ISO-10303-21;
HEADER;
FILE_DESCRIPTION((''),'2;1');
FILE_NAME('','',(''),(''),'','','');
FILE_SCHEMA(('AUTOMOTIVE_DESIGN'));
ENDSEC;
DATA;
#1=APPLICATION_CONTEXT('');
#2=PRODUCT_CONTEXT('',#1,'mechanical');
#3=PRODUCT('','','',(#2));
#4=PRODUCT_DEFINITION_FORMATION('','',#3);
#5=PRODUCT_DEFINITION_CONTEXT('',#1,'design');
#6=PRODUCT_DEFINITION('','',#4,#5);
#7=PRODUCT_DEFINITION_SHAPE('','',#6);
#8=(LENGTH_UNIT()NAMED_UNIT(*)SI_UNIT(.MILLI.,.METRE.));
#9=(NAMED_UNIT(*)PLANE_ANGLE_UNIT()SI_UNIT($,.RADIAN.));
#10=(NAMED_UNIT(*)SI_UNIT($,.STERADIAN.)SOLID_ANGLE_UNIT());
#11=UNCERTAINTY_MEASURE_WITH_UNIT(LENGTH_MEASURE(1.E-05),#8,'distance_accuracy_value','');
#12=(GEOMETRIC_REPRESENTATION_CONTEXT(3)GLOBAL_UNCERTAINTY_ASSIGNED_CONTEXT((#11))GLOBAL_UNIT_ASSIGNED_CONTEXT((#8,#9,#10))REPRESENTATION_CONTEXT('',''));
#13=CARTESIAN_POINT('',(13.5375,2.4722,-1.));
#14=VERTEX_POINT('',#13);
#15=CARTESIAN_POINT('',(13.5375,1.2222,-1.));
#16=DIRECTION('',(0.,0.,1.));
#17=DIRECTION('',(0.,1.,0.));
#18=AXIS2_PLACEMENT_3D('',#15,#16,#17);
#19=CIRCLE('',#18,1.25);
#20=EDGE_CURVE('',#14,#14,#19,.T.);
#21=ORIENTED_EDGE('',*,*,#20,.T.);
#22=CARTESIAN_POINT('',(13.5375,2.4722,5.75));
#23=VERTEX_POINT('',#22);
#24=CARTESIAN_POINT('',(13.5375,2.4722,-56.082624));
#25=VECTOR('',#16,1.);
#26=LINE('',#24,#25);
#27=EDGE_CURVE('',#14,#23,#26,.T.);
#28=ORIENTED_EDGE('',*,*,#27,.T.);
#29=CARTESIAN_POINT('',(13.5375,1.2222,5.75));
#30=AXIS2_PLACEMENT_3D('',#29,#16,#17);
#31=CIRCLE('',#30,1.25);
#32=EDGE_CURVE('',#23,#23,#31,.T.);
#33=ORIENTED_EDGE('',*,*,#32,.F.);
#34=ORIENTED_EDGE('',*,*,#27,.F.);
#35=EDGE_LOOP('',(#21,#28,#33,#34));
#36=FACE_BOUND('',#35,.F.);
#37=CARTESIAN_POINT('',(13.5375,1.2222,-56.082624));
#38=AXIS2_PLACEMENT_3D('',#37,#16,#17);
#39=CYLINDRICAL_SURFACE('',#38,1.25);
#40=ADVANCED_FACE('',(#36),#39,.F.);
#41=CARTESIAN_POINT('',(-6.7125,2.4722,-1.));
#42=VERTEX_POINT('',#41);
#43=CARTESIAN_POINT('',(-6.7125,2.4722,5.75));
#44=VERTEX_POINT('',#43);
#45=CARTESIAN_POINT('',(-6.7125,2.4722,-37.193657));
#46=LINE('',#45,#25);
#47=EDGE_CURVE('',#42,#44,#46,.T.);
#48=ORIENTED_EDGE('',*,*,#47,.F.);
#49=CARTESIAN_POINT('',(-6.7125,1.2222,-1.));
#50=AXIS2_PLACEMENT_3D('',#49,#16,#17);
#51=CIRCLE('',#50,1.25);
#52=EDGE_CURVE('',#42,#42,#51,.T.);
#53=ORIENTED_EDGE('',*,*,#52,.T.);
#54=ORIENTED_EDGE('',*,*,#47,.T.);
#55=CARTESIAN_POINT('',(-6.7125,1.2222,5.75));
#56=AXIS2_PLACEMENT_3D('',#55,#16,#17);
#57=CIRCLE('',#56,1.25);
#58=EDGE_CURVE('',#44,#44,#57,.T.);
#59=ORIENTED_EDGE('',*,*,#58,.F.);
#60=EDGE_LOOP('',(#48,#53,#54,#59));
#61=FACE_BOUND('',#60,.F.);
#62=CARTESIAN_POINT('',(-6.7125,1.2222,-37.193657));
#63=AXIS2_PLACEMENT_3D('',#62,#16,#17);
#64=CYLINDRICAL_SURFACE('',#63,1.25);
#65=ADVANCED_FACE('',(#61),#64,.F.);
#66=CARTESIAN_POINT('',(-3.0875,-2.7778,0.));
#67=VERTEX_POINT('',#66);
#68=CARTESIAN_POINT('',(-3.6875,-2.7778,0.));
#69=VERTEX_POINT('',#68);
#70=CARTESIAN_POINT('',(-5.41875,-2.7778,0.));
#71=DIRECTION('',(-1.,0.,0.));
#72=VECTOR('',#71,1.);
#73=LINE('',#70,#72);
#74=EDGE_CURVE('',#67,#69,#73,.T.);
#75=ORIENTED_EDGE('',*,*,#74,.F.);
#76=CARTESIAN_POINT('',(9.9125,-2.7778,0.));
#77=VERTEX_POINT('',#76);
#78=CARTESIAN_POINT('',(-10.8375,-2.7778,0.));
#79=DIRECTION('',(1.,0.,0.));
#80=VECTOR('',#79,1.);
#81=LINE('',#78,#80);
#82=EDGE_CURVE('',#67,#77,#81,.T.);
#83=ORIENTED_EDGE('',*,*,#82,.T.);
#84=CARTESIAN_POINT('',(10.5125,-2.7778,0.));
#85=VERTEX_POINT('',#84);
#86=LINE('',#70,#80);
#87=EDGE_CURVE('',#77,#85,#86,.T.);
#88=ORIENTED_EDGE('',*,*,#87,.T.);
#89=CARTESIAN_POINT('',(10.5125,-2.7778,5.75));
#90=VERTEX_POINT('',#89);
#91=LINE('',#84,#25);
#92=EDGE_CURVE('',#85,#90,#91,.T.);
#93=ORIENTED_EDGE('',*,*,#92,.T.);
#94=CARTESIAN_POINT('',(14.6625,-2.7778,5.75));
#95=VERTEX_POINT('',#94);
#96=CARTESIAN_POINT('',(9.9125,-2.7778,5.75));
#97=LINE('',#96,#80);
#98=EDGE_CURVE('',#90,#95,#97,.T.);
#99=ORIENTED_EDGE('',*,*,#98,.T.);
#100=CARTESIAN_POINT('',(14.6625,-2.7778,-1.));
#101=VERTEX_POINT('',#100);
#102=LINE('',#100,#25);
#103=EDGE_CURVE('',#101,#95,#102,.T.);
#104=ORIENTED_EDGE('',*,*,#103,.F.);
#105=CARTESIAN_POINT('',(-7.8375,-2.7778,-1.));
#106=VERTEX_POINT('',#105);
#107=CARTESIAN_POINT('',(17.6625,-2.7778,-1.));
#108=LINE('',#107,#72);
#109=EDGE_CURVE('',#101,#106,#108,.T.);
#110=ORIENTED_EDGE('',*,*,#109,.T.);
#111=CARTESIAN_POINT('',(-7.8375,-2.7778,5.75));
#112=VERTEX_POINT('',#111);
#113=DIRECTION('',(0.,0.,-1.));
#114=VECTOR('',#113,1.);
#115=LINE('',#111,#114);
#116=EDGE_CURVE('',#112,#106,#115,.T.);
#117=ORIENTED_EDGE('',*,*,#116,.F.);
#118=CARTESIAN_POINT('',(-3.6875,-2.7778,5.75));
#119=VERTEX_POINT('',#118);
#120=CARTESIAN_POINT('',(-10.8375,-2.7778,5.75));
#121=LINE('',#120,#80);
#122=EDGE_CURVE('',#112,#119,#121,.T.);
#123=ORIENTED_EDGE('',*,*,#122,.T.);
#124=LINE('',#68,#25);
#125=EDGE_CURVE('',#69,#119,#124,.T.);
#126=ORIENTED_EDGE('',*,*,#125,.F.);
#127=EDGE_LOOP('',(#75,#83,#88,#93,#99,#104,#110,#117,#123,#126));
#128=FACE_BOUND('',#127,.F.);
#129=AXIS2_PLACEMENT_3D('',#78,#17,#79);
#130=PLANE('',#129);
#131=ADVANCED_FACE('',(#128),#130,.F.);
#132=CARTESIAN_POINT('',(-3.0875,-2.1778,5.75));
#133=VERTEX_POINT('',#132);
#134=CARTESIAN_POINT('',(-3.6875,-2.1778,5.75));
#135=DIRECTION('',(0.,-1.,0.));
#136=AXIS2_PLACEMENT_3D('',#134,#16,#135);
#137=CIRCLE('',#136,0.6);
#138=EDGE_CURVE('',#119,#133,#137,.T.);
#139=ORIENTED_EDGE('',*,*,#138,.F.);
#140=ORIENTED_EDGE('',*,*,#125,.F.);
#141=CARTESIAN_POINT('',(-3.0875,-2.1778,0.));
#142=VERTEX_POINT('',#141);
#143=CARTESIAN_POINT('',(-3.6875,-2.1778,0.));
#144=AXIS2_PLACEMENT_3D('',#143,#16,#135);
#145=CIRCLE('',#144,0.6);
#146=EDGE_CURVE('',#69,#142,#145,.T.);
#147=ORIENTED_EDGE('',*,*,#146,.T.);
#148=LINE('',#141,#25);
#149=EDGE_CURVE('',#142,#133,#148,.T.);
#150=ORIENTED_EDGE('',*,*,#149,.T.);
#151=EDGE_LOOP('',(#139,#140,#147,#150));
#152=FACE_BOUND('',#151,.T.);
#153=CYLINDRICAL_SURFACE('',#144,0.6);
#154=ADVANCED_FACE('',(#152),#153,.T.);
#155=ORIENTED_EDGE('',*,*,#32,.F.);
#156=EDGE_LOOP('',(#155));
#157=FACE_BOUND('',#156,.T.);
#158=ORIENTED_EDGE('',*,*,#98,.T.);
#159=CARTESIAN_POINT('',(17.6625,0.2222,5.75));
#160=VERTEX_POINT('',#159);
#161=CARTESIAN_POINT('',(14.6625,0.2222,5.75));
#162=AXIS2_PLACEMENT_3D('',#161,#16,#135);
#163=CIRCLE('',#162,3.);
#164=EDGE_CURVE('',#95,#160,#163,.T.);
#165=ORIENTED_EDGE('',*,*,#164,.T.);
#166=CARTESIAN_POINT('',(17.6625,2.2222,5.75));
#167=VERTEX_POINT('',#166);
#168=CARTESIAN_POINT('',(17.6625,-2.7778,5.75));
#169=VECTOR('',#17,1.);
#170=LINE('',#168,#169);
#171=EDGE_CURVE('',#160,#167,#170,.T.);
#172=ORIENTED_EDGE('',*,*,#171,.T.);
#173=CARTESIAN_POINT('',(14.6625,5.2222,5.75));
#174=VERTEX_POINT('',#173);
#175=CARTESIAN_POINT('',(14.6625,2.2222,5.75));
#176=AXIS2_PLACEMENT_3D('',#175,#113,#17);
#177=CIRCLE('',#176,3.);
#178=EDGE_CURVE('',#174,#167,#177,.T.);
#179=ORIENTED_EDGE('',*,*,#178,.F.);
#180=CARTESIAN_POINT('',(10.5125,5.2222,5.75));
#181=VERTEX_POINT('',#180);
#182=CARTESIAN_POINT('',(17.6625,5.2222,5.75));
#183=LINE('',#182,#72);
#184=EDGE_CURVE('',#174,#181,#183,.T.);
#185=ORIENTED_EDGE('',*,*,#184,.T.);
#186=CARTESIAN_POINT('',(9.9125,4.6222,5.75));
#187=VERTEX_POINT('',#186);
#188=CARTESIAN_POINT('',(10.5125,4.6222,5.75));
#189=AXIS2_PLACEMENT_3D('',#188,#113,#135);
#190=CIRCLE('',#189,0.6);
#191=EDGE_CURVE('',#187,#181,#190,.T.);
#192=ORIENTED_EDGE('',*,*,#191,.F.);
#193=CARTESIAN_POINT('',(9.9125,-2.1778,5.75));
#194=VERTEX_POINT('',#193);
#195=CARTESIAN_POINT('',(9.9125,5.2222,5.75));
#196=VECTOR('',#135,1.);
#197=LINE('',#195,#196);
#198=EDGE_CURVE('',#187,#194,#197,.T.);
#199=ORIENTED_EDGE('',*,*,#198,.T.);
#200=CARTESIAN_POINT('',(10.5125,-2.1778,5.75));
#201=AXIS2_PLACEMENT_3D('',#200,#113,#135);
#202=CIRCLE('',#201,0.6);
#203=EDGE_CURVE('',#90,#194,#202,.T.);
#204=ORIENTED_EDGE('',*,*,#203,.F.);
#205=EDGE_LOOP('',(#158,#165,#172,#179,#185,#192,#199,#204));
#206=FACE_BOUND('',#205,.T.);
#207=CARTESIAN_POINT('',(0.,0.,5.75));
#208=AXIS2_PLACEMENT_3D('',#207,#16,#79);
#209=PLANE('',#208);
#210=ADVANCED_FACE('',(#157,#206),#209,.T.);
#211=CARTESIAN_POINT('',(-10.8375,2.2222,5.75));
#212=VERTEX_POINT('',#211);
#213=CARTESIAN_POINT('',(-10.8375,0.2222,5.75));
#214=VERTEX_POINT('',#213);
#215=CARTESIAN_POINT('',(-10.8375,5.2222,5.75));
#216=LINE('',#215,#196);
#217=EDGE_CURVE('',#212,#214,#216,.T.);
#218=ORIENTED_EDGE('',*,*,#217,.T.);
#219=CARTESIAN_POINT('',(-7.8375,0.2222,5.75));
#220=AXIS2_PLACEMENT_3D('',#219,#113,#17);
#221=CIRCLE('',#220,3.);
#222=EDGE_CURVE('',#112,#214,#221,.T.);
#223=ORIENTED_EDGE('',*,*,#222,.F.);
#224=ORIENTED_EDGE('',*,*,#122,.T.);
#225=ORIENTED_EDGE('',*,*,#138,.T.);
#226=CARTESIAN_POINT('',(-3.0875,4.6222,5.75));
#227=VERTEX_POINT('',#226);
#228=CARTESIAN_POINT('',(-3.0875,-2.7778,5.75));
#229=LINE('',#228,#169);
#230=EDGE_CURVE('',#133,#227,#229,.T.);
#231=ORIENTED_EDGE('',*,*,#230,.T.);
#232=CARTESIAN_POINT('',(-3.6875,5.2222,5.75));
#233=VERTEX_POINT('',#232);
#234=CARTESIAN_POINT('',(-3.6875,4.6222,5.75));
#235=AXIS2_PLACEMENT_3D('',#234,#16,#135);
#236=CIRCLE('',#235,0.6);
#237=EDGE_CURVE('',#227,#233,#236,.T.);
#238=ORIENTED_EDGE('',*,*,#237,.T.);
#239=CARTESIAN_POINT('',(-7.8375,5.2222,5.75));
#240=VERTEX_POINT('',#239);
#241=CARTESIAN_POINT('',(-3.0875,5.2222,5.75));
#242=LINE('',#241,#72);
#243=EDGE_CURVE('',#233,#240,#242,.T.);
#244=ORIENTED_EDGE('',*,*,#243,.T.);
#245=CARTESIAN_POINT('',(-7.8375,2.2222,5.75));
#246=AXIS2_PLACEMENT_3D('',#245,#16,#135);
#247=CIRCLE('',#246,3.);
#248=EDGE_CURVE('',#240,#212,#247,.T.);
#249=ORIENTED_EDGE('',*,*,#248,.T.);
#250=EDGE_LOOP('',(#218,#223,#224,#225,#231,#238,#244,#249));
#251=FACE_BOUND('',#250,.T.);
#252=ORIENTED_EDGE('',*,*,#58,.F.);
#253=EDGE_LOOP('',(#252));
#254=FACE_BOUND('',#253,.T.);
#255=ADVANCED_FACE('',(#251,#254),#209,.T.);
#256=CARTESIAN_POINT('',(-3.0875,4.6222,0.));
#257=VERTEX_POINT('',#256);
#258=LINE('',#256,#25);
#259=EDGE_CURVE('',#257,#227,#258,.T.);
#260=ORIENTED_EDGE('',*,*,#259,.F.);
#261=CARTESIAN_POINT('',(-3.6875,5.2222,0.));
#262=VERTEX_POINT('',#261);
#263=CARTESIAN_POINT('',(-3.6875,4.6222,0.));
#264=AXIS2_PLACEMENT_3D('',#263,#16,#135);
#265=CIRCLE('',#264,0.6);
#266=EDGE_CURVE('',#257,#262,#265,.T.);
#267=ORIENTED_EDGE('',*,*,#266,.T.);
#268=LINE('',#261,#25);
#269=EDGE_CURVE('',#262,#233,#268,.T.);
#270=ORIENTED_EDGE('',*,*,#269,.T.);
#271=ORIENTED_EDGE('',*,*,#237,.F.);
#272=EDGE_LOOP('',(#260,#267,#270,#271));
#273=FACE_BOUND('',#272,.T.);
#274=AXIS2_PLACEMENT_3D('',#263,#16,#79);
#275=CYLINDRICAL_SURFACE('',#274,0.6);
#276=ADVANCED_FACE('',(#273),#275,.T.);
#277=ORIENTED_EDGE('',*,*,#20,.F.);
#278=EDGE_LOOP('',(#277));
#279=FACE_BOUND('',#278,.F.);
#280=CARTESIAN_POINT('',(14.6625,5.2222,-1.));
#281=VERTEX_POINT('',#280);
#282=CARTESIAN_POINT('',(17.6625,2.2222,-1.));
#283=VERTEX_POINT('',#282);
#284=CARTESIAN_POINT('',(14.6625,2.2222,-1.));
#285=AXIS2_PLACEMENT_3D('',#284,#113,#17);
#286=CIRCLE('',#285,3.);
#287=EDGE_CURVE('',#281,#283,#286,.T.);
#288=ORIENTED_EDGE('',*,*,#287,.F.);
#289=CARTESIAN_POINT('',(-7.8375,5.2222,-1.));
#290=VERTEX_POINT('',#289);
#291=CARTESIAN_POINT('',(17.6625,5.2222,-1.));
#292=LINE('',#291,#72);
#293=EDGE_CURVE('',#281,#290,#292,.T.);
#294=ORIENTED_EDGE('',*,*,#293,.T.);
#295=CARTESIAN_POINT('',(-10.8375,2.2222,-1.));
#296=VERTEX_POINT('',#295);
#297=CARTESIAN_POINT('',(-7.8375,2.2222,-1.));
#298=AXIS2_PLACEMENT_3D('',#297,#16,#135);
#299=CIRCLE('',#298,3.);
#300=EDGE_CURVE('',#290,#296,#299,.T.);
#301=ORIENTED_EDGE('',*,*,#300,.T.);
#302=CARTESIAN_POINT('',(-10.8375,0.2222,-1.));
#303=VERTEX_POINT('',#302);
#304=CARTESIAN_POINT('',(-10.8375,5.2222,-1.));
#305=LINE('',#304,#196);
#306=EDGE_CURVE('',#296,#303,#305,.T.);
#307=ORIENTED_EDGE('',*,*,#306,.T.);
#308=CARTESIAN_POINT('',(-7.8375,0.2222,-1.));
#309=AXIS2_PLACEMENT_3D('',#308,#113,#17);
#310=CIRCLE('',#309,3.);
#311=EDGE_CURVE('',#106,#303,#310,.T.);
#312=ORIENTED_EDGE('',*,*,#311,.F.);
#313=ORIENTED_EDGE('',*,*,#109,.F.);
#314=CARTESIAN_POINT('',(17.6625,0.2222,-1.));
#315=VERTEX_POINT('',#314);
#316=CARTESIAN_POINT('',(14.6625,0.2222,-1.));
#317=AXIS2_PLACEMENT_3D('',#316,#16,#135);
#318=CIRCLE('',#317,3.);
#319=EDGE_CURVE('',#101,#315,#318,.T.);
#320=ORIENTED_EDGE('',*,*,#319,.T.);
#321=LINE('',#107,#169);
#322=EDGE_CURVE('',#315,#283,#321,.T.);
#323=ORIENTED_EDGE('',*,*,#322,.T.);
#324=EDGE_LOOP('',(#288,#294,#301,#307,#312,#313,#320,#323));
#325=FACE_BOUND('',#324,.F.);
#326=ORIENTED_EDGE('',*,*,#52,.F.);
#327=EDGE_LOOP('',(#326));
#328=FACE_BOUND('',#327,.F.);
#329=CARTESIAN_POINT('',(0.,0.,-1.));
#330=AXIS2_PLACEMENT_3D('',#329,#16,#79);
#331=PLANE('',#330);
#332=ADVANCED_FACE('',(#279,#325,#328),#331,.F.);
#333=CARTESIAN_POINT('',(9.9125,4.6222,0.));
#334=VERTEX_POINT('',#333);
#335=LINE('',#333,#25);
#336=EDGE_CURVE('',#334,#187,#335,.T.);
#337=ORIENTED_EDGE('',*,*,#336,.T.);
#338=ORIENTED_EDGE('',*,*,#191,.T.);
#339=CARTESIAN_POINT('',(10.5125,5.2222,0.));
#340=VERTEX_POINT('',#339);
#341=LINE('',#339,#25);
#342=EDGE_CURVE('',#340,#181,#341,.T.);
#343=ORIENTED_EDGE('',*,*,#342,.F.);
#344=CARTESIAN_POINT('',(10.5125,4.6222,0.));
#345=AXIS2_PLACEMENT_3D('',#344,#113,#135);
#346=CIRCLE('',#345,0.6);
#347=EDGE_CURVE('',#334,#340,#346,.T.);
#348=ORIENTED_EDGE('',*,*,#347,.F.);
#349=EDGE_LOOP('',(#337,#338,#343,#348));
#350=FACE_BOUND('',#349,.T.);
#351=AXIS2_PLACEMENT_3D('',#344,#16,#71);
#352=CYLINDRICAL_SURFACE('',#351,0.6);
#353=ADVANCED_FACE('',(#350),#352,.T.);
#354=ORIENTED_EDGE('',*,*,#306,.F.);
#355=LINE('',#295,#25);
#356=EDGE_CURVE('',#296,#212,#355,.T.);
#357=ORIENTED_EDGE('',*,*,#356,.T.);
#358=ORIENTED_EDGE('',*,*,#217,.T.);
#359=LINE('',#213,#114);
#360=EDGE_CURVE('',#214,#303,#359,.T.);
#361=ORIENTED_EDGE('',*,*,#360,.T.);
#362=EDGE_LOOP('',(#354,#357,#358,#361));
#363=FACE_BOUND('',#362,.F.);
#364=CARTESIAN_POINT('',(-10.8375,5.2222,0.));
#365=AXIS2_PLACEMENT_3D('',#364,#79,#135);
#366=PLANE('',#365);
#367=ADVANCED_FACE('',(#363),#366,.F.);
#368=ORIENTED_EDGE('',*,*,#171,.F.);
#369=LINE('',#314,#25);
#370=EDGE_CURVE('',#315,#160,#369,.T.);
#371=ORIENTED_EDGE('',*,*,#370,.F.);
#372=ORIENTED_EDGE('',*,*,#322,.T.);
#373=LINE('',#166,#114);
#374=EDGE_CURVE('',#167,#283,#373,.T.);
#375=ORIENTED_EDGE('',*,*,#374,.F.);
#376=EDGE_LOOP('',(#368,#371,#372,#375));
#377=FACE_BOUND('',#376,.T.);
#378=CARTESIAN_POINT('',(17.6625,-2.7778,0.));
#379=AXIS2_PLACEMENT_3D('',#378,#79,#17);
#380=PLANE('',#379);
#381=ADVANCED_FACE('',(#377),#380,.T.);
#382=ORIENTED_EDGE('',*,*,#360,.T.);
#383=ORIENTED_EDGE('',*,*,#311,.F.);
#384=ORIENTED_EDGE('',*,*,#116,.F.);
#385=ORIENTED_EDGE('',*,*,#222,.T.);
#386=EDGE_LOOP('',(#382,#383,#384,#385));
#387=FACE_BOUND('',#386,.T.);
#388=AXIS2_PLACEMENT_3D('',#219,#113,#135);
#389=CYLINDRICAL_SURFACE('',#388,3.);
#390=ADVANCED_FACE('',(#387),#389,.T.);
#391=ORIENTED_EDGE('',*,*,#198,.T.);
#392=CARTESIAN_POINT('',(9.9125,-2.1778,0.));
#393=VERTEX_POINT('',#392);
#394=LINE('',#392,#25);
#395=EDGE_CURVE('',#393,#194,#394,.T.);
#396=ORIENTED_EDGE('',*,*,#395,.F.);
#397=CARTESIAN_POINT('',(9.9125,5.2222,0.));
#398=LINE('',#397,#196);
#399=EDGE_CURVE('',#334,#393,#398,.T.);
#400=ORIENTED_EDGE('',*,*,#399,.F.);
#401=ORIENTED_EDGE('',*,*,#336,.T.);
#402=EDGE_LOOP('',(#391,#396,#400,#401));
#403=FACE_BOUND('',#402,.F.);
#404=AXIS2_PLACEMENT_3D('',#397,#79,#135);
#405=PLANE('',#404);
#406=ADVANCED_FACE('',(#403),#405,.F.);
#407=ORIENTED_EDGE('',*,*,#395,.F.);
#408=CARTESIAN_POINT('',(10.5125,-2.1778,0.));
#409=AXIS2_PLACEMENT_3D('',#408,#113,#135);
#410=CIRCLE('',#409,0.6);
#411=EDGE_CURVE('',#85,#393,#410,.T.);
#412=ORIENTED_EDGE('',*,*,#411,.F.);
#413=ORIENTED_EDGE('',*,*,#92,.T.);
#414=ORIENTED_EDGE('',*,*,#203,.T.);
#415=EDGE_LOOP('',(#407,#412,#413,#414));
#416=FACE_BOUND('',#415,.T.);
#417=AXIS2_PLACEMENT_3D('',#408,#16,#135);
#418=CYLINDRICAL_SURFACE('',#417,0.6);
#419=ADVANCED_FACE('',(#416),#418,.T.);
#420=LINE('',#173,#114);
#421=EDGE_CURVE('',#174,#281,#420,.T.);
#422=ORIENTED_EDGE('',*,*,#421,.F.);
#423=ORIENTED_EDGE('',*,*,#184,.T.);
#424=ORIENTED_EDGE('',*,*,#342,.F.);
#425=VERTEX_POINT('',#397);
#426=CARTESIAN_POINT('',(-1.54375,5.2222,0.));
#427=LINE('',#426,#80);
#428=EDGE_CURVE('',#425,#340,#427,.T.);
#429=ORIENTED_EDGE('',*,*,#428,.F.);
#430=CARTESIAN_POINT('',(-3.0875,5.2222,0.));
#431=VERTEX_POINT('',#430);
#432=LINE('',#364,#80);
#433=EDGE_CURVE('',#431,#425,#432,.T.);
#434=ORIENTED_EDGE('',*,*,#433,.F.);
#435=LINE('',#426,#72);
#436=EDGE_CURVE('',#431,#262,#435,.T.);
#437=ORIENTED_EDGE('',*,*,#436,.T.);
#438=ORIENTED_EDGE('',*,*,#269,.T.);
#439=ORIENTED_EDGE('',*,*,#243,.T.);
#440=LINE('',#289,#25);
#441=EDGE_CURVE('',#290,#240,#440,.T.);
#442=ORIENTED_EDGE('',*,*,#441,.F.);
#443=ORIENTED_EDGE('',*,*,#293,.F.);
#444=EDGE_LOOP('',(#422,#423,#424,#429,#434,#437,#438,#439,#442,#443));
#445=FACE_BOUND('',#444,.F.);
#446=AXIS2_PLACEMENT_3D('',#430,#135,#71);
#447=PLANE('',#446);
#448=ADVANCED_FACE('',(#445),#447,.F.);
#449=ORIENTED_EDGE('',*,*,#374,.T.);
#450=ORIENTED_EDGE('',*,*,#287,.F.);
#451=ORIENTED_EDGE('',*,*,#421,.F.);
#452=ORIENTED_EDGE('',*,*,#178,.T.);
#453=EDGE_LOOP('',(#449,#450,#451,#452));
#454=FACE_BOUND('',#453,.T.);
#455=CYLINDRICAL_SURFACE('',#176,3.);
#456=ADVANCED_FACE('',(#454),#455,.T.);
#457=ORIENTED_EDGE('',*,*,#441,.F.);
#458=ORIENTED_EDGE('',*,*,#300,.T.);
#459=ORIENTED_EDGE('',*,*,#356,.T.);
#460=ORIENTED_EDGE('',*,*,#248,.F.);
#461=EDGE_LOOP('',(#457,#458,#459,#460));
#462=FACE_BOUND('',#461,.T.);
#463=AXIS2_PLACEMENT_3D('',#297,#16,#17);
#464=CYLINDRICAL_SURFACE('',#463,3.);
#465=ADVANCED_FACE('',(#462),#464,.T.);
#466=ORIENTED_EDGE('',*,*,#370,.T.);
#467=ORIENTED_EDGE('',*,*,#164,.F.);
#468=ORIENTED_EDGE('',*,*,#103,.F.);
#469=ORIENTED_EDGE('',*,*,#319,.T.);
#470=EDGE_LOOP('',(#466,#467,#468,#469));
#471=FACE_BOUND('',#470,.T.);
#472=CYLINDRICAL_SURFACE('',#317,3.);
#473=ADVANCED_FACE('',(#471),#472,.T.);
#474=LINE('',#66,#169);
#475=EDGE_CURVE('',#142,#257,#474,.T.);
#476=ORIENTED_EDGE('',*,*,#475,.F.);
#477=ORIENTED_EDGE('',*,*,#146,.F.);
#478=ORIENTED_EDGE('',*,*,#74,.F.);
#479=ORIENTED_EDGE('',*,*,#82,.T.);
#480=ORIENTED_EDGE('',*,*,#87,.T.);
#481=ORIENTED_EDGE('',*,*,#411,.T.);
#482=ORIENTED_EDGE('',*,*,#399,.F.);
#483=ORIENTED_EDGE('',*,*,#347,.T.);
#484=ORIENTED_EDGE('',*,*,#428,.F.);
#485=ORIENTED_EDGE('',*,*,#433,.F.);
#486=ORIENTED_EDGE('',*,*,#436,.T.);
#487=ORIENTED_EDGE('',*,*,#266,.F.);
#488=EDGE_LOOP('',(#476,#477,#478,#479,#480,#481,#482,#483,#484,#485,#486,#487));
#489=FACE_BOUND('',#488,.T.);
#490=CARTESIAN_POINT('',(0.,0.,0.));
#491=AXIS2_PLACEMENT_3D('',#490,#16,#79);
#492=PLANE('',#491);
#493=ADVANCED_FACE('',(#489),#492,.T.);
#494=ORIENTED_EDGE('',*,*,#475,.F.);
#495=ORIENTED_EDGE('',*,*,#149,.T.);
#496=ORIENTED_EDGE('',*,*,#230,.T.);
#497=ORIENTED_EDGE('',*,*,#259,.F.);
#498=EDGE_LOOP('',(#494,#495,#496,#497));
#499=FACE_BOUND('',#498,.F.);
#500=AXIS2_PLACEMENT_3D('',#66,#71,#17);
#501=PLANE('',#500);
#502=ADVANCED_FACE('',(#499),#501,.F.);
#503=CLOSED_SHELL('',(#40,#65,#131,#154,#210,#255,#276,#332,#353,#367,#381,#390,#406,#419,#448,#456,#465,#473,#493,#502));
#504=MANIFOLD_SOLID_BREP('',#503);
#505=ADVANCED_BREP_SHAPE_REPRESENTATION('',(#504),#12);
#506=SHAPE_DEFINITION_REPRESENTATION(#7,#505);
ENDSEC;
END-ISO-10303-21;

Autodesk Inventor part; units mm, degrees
ref_plane "YZ Plane" through (0, 0, 0) normal (1, 0, 0) x (0, 1, 0)
ref_plane "XZ Plane" through (0, 0, 0) normal (0, 1, 0) x (-1, 0, 0)
ref_plane "XY Plane" through (0, 0, 0) normal (0, 0, 1) x (1, 0, 0)
sketch "Sketch1" plane through (0, 0, 0) normal (0, 0, 1) x (1, 0, 0)
  line L0 (-3.0875, 5.2222) -> (9.9125, 5.2222)
  line L1 (9.9125, 5.2222) -> (9.9125, -2.7778)
  line L2 (9.9125, -2.7778) -> (-3.0875, -2.7778)
  line L3 (-3.0875, -2.7778) -> (-3.0875, 5.2222)
  line L4 (-3.0875, 5.2222) -> (-10.8375, 5.2222)
  line L5 (-10.8375, 5.2222) -> (-10.8375, -2.7778)
  line L6 (-10.8375, -2.7778) -> (-3.0875, -2.7778)
  line L7 (9.9125, -2.7778) -> (17.6625, -2.7778)
  line L8 (17.6625, -2.7778) -> (17.6625, 5.2222)
  line L9 (17.6625, 5.2222) -> (9.9125, 5.2222)
  point P0 (0, 0)
  point P1 (-6.7125, 1.2222)
  point P2 (13.5375, 1.2222)
  dimension "d0" = 13
  dimension "d1" = 8
  dimension "d2" = 7.75
  dimension "d3" = 7.75
  dimension "d6" = 4
  dimension "d7" = 4
  dimension "d22" = 20.25
  dimension "d23" = 28.5
  dimension "d24" = 4.125
extrude "Extrusion1" add sketch "Sketch1" along normal blind 5.75 contours L3 L6 L5 L4 | L9 L8 L7 L1
extrude "Extrusion2" add sketch "Sketch1" against normal blind 1
hole "Hole1" at (-6.7125, 1.2222, 0) at (13.5375, 1.2222, 0) direction (0, 0, 1) diameter 2.5 end through all both
fillet "Fillet1" radius 3 4 edges at (-10.8375, -2.7778, 2.375) (-10.8375, 5.2222, 2.375) (17.6625, -2.7778, 2.375) (17.6625, 5.2222, 2.375)
fillet "Fillet2" radius 0.6 4 edges at (9.9125, -2.7778, 2.875) (-3.0875, -2.7778, 2.875) (9.9125, 5.2222, 2.875) (-3.0875, 5.2222, 2.875)
equation "\"d3\" = d2"
equation "\"d6\" = 0.5 * d1"
equation "\"d7\" = d6"
equation "\"d24\" = -0.5 * d22 + 0.5 * d23"
properties part number "3DP_PLA_X_axis_endstop_mount" material "ABS Plastic"
